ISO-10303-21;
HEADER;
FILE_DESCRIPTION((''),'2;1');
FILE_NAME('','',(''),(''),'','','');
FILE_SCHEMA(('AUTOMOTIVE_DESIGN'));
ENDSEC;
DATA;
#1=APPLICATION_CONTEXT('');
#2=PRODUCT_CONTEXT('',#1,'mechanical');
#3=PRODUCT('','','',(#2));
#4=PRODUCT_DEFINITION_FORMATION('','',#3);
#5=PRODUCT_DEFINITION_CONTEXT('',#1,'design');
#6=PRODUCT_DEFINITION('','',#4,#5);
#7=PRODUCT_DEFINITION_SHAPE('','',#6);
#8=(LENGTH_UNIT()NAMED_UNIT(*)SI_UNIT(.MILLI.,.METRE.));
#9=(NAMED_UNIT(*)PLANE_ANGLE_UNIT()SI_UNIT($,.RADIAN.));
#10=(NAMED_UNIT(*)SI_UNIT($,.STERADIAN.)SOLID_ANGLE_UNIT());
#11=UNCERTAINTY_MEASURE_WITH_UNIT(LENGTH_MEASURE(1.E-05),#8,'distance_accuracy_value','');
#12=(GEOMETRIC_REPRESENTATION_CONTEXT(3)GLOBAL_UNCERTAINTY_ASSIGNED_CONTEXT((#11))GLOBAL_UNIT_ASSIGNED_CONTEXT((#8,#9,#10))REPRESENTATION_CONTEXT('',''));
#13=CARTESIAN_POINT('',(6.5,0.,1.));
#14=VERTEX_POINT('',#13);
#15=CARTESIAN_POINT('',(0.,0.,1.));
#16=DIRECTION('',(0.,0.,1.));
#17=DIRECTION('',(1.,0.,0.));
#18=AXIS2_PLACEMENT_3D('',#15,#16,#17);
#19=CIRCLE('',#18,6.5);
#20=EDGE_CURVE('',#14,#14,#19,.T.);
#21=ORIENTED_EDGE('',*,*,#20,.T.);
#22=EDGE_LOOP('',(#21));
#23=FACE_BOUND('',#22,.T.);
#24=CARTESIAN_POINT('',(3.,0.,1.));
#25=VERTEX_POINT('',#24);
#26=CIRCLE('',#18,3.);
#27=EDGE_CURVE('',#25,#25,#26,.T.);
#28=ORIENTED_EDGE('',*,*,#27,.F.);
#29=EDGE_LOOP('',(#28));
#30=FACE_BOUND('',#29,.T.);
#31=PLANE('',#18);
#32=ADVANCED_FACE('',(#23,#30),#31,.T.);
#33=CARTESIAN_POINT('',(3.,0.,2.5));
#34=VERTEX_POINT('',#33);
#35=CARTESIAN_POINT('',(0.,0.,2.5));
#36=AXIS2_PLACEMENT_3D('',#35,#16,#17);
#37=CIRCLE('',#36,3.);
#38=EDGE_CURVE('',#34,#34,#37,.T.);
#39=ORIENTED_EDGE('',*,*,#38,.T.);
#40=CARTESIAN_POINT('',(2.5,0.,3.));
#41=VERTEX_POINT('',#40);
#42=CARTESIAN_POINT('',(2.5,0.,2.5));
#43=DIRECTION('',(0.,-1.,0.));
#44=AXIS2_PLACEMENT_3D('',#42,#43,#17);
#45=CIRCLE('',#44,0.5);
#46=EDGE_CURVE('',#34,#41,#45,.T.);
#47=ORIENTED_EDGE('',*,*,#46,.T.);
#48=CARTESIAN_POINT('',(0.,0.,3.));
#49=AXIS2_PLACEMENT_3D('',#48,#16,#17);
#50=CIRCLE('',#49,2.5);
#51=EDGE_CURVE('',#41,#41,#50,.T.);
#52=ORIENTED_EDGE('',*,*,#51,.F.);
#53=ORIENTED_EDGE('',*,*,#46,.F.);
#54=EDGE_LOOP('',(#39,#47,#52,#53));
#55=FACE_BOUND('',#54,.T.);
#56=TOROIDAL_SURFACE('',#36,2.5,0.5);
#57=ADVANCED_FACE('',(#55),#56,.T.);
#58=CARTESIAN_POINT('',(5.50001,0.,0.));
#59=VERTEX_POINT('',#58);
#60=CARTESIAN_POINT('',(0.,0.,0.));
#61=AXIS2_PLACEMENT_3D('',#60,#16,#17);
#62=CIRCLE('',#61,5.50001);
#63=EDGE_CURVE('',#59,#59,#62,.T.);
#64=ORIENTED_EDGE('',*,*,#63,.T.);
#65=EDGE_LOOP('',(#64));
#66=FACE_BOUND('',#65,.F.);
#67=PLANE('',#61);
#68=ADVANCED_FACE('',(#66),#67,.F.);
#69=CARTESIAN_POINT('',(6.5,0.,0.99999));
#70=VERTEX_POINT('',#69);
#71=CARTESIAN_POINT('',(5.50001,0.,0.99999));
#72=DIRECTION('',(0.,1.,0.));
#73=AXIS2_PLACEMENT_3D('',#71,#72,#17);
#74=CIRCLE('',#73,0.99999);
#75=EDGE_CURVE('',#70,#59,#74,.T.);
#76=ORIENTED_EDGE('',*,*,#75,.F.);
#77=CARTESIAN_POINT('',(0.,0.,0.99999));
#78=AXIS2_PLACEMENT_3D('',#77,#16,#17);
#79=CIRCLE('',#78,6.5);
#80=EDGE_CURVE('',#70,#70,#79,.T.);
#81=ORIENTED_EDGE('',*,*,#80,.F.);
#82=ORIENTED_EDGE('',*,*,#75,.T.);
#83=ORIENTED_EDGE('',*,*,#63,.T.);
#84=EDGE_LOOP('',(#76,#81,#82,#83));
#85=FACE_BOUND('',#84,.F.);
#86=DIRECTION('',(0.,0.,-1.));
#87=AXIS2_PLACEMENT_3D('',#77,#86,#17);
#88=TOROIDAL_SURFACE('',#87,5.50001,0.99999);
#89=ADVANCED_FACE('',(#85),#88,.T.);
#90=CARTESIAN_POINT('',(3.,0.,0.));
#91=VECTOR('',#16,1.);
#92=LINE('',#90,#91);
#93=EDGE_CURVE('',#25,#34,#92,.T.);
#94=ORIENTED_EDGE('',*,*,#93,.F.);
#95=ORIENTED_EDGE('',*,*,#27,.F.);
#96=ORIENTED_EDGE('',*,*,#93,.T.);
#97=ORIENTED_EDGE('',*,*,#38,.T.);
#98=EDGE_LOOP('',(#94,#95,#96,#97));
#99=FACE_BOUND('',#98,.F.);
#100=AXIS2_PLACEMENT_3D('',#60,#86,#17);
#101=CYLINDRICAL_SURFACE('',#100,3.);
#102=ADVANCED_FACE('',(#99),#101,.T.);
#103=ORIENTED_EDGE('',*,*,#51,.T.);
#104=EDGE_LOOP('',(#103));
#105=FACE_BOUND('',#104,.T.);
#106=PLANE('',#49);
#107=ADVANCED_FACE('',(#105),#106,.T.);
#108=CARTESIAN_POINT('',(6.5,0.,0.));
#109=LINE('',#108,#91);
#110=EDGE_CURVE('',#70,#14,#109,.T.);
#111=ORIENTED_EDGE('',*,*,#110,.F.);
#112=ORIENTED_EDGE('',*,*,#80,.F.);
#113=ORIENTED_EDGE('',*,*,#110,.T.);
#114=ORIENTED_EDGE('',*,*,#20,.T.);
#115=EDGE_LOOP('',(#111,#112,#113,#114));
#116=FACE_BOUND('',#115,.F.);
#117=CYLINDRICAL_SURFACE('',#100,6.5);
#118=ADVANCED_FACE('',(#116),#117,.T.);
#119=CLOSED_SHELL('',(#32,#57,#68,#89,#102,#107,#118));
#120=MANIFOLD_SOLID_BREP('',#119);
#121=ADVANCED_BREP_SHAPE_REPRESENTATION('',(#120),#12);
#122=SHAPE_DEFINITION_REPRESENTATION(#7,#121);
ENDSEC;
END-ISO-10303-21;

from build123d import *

# Parameters (mm, degrees)
F0_R     = 6.5
F0_R_2   = 3
F1_DEPTH = 1
F2_DEPTH = 3
F3_R     = 0.99999
F4_R     = 0.5


# Not quite as in the source:
# - a fillet or chamfer is up to 0.001 mm smaller than in the source, because OpenCascade refuses the exact size


with BuildPart() as f1:
    # F0 (on Top) → F1 (new body)
    with BuildSketch(Plane.XY):
        Circle(F0_R)
        Circle(F0_R_2, mode=Mode.SUBTRACT)
    extrude(amount=F1_DEPTH)

    # F0 (on Top) → F2 (join)
    with BuildSketch(Plane.XY):
        Circle(F0_R_2)
    extrude(amount=F2_DEPTH)

    # F3 (radius 1 in the source; OpenCascade refuses exactly that, so slightly less here)
    f3_edges = [f1.edges().sort_by_distance(p)[0] for p in [
        (-6.5, 0, 0),
    ]]
    fillet(f3_edges, radius=F3_R)

    # F4
    f4_edges = [f1.edges().sort_by_distance(p)[0] for p in [
        (-3, 0, 3),
    ]]
    fillet(f4_edges, radius=F4_R)


solid = f1.part
